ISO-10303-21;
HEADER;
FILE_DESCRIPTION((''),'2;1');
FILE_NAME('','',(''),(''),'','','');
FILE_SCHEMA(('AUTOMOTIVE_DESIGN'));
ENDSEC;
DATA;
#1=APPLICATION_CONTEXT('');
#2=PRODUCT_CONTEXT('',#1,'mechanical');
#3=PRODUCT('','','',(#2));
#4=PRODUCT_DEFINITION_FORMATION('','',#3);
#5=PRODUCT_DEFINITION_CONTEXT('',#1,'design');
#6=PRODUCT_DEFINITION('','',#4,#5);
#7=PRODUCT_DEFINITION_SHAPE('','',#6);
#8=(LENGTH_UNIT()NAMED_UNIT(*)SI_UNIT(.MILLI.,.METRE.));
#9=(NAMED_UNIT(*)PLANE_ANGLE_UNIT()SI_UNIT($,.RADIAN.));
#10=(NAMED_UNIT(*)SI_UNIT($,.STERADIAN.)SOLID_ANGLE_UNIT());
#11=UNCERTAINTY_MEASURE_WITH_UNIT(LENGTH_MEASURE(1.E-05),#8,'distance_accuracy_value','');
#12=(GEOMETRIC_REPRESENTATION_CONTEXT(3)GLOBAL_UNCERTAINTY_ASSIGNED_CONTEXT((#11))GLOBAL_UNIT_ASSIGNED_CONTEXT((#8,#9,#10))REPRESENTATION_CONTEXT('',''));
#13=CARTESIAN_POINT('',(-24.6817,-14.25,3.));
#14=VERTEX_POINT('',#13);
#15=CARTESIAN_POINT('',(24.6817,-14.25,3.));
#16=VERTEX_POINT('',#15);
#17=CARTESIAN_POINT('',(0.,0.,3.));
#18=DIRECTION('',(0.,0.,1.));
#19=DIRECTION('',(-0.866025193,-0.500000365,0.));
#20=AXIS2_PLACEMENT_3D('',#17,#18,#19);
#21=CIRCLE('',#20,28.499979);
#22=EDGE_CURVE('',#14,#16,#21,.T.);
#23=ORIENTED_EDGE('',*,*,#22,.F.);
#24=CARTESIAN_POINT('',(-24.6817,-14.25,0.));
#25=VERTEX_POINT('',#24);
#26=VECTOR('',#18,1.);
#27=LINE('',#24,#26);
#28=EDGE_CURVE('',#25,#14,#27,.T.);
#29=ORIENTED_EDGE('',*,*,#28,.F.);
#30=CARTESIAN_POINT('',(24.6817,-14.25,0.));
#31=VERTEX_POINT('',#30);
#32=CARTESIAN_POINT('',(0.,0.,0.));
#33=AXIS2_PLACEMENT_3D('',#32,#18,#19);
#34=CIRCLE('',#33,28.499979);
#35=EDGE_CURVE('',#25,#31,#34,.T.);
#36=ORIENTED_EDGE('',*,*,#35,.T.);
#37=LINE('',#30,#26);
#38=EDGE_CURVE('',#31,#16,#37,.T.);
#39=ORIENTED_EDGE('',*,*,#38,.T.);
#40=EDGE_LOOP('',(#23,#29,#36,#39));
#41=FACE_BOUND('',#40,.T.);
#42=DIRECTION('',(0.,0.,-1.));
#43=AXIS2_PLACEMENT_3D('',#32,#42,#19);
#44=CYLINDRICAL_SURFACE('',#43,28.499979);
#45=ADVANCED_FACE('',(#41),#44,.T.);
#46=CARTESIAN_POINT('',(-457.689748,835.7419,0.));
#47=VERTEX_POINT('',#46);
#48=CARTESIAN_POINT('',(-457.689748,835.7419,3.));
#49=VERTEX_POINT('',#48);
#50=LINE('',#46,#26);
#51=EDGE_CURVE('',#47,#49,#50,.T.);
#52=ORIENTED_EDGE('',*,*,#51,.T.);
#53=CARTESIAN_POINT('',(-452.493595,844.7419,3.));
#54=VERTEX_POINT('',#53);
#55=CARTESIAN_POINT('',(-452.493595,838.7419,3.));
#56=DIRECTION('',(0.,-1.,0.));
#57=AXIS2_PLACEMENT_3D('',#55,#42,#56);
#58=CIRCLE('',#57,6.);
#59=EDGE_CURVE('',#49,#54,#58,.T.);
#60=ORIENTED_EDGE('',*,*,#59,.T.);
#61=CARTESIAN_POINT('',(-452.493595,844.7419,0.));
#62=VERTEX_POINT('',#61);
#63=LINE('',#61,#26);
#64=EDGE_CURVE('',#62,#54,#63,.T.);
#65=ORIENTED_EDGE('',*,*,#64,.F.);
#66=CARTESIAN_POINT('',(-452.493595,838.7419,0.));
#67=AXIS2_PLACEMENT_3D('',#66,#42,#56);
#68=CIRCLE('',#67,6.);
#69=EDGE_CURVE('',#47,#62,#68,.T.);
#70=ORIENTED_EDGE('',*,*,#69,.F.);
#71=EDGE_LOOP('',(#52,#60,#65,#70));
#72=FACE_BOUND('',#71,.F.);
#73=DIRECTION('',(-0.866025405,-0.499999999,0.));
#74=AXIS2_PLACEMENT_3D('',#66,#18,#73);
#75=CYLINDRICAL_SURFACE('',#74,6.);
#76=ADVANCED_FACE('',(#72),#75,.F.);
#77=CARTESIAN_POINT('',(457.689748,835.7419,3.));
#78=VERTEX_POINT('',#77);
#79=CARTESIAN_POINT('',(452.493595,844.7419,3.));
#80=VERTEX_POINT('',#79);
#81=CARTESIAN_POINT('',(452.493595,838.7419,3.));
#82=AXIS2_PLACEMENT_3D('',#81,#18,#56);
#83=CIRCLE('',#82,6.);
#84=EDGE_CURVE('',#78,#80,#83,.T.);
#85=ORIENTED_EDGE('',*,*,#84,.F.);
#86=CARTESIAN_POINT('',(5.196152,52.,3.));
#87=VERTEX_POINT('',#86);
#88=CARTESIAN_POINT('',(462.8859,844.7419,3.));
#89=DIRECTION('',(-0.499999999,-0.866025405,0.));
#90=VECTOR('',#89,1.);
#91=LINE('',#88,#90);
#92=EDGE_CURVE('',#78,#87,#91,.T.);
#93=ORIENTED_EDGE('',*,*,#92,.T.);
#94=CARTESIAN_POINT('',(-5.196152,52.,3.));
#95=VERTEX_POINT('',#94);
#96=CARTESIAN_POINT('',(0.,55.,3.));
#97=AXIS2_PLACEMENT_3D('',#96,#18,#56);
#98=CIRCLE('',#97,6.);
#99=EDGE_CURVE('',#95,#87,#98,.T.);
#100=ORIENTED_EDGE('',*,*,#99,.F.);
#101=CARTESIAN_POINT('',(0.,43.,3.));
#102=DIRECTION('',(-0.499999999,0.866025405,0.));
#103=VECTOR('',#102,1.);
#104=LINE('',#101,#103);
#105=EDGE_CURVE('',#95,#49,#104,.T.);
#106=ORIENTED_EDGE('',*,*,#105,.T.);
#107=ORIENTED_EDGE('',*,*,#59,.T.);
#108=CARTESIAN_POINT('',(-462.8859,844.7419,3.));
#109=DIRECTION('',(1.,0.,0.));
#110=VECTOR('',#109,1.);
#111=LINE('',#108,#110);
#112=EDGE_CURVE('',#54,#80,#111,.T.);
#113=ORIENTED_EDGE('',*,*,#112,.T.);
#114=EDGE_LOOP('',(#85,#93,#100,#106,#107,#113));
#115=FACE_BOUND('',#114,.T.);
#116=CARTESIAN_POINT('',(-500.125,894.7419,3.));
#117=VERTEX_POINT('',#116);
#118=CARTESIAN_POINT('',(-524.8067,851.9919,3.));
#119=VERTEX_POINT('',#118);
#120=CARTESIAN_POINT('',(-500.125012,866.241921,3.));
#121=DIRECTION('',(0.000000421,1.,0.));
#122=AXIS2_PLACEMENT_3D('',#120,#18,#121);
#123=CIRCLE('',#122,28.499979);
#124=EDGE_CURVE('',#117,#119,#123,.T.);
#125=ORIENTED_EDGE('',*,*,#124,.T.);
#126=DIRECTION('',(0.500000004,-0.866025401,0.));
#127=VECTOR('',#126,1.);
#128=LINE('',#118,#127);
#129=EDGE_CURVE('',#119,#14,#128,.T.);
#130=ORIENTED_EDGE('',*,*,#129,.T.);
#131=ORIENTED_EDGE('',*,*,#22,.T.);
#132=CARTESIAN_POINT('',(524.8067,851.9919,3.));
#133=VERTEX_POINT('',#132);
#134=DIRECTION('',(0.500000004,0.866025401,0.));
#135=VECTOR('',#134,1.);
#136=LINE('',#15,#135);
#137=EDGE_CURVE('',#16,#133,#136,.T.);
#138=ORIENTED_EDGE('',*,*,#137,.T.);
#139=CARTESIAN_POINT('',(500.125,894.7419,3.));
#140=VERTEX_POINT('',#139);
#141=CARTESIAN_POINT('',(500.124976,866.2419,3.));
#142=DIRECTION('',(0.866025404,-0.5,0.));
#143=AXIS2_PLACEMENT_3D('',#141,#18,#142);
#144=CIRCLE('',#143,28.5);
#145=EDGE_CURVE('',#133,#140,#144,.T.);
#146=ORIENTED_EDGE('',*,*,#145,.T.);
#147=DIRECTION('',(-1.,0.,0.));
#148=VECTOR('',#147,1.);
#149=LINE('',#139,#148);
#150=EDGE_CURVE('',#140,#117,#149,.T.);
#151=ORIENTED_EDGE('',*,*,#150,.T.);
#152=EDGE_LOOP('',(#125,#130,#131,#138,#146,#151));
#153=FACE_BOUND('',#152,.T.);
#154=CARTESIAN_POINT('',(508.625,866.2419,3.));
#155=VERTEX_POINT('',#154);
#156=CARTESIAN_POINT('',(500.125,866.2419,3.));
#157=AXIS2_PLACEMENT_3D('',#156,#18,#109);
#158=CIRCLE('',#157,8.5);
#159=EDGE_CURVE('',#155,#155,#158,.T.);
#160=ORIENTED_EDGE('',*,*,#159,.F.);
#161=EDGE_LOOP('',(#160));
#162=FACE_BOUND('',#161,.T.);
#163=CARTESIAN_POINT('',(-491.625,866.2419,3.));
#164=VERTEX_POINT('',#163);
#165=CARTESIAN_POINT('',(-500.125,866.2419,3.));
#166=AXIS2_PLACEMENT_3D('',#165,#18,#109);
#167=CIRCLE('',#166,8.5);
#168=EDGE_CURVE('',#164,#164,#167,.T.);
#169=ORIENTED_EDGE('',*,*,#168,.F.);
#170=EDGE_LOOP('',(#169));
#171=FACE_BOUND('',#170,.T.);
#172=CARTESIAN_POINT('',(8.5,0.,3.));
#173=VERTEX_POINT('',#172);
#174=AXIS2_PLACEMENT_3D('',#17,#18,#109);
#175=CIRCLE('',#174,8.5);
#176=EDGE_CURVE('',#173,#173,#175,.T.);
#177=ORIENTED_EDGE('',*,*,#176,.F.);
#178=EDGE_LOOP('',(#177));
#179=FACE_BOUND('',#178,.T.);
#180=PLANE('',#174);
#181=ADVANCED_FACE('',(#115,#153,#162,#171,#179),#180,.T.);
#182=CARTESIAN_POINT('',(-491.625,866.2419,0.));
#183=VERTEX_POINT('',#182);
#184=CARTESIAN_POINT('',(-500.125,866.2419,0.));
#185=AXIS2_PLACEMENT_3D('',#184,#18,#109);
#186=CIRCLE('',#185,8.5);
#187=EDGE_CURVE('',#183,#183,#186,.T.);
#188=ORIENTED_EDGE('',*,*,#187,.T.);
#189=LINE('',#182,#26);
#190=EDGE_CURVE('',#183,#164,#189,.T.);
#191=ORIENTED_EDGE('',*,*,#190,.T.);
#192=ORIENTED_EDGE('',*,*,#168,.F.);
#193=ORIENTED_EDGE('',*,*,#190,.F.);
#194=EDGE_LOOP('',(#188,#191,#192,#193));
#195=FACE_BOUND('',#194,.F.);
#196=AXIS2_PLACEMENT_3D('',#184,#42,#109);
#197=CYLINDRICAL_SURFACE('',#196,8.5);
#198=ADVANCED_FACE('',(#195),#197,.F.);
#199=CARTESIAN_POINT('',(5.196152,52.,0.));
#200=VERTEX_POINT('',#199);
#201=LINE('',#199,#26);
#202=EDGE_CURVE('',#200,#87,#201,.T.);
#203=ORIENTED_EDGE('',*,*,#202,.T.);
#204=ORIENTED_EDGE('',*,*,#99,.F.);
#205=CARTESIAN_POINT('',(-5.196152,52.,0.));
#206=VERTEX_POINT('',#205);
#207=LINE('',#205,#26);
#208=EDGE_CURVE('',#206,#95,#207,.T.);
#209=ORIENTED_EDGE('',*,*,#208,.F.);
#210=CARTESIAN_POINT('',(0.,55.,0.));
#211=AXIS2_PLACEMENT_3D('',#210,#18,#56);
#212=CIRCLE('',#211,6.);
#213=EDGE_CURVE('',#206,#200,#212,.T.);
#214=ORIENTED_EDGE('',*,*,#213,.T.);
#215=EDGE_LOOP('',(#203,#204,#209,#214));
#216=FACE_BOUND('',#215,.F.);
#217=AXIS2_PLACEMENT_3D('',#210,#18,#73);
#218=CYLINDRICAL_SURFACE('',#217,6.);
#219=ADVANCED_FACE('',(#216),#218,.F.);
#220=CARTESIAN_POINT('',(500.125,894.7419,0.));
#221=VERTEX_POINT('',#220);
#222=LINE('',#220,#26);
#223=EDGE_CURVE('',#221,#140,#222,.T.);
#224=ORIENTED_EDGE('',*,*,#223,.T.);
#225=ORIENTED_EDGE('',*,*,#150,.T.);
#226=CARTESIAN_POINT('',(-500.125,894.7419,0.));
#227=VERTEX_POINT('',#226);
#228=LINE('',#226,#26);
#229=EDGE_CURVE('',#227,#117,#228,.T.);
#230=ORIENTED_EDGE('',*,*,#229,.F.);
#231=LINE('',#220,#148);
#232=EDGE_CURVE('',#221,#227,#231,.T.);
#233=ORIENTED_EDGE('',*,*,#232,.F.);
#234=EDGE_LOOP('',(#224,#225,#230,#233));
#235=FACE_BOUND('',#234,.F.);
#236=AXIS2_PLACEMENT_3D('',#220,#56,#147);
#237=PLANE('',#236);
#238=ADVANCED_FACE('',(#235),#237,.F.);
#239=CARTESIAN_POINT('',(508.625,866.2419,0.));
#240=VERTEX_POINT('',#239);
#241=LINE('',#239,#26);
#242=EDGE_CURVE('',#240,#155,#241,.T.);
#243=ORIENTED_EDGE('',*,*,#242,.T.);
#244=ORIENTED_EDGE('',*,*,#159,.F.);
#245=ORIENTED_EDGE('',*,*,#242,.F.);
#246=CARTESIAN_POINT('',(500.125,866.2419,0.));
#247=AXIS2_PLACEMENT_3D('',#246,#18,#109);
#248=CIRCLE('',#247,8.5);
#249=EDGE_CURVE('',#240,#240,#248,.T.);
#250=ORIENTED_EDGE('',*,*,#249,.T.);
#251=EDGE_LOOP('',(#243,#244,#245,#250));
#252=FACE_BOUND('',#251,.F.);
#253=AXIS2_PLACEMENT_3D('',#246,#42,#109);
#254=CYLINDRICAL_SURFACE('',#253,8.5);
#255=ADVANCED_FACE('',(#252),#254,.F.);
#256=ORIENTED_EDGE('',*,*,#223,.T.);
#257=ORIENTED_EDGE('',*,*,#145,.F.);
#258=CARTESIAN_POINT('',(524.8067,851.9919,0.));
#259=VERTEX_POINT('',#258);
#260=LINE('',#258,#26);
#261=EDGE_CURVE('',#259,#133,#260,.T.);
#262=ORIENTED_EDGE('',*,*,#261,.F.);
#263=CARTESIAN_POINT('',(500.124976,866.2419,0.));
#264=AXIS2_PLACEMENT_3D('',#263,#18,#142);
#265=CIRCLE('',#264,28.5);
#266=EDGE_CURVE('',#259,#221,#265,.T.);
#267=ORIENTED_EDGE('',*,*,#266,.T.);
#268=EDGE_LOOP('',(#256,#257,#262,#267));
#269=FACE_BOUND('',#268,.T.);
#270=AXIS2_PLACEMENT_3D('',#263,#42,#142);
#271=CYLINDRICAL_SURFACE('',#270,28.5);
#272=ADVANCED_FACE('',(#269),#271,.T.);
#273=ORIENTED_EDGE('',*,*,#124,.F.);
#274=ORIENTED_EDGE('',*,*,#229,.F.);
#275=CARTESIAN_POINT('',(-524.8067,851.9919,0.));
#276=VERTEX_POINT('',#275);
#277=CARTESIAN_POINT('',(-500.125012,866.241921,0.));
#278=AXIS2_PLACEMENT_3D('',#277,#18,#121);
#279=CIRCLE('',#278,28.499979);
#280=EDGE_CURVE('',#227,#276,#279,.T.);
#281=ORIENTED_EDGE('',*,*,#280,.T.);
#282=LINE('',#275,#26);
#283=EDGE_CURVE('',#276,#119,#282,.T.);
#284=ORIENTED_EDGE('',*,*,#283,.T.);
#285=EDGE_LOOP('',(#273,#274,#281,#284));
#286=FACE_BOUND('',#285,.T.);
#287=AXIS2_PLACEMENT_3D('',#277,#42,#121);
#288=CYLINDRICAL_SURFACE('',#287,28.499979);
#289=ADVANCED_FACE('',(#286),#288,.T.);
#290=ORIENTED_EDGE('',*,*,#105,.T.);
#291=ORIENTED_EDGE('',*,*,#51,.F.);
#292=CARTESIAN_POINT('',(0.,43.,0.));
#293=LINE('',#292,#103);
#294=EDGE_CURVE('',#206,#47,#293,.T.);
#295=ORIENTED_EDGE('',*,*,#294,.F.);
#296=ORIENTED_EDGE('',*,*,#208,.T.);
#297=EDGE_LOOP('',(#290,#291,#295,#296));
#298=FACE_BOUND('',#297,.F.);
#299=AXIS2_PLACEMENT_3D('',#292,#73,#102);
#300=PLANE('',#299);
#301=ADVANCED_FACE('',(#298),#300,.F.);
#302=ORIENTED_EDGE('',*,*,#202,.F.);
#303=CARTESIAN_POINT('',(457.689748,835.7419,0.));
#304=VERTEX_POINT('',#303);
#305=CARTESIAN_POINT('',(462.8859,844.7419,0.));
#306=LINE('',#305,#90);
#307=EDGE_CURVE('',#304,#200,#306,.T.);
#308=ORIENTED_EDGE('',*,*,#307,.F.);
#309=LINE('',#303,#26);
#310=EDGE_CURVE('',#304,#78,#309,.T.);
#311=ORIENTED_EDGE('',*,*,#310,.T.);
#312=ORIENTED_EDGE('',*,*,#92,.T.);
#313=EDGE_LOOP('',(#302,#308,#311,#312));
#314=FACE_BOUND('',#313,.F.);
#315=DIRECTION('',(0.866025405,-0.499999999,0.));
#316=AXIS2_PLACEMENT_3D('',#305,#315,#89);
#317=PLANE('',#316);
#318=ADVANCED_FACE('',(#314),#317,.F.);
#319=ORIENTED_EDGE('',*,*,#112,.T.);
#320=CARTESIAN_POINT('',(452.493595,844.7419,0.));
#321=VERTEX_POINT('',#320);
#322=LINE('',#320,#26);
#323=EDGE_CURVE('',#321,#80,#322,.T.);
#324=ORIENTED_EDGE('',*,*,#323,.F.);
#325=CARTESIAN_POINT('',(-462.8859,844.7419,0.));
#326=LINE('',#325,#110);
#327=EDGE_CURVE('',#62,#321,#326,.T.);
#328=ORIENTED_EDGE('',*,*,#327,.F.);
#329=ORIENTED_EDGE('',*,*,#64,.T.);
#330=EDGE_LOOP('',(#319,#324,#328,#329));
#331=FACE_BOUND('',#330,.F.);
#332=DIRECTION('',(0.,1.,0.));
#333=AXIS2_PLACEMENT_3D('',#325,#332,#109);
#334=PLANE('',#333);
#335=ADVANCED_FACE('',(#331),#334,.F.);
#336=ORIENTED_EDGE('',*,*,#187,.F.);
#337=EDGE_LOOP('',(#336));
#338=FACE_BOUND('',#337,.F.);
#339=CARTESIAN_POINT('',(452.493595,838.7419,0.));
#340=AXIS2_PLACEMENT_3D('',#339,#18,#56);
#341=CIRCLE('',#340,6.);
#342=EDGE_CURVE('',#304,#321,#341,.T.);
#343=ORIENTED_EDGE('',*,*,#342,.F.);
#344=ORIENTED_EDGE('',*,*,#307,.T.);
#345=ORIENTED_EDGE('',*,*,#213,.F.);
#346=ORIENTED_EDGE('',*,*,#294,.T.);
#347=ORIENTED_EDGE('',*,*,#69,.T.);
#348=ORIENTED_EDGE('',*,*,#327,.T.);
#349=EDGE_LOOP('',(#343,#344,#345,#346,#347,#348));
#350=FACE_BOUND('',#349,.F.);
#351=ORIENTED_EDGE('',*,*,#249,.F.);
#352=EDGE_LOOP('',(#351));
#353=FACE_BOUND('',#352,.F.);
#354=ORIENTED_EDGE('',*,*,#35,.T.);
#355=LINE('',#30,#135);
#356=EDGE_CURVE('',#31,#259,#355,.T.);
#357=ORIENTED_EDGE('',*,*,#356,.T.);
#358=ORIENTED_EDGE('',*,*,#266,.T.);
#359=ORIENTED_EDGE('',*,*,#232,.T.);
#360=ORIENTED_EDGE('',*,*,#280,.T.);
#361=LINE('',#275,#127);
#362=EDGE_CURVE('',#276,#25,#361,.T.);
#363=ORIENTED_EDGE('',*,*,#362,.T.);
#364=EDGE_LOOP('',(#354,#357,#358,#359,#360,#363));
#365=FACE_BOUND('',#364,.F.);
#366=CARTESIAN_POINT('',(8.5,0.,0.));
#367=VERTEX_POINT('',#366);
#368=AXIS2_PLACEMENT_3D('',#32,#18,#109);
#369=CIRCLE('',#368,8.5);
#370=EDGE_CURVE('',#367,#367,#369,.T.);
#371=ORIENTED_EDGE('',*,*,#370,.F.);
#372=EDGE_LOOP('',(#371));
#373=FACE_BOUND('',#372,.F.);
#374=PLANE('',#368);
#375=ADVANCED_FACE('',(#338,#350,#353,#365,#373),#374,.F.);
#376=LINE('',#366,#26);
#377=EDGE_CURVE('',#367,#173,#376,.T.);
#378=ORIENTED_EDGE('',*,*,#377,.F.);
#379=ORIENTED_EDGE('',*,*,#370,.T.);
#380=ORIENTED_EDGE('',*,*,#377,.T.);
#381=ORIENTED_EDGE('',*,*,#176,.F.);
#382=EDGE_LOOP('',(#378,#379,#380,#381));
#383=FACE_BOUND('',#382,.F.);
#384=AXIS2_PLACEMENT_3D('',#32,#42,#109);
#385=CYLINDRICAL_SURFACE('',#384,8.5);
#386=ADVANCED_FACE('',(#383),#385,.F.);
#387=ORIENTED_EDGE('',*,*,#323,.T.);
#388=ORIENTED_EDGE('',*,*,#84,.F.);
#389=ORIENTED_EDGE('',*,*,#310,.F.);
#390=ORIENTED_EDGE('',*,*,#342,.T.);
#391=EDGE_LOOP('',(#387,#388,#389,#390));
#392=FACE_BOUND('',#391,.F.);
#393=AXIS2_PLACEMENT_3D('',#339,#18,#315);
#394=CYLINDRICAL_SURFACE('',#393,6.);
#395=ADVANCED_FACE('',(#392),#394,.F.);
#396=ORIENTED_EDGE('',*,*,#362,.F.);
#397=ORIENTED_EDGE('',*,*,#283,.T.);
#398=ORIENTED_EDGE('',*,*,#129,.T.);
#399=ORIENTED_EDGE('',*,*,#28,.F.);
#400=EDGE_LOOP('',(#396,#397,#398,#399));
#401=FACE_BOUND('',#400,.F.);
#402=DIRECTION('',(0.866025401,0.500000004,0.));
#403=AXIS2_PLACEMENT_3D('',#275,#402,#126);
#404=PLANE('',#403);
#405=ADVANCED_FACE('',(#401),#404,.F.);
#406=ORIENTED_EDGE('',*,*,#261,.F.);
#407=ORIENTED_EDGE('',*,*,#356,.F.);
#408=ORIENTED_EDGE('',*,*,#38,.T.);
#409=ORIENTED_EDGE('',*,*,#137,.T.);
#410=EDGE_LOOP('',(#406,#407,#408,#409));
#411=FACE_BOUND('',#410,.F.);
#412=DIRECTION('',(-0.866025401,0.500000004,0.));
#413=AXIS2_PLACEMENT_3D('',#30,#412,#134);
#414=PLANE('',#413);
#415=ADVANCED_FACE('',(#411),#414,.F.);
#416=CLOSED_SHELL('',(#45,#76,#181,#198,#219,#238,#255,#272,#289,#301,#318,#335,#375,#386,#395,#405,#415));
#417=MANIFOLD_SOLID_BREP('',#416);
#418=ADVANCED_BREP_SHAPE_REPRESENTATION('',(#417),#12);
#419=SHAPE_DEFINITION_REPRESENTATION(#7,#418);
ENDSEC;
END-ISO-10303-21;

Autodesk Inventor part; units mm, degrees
ref_plane "YZ Plane" through (0, 0, 0) normal (1, 0, 0) x (0, 1, 0)
ref_plane "XZ Plane" through (0, 0, 0) normal (0, 1, 0) x (-1, 0, 0)
ref_plane "XY Plane" through (0, 0, 0) normal (0, 0, 1) x (1, 0, 0)
sketch "Sketch1" plane through (0, 0, 0) normal (0, 0, 1) x (1, 0, 0)
  circle A0 centre (0, 0) radius 8.5
  line L0 (-524.8067, 851.9919) -> (-24.6817, -14.25)
  arc A1 (-24.6817, -14.25) -> (24.6817, -14.25) centre (0, 0) ccw
  line L1 (24.6817, -14.25) -> (524.8067, 851.9919)
  arc A2 (524.8067, 851.9919) -> (500.125, 894.7419) centre (500.125, 866.2419) ccw
  line L2 (500.125, 894.7419) -> (-500.125, 894.7419)
  arc A3 (-500.125, 894.7419) -> (-524.8067, 851.9919) centre (-500.125, 866.2419) ccw
  line L3 (0, 0) -> (0, 894.7419) construction
  line L4 (-462.8859, 844.7419) -> (462.8859, 844.7419)
  line L5 (462.8859, 844.7419) -> (0, 43)
  line L6 (0, 43) -> (-462.8859, 844.7419)
  circle A4 centre (-500.125, 866.2419) radius 8.5
  circle A5 centre (500.125, 866.2419) radius 8.5
  dimension "d34" = 17
  dimension "d35" = 20
  dimension "d36" = 1000.25
  dimension "d37" = 1000.25
  dimension "d38" = 50
  dimension "d39" = 17
  dimension "d40" = 17
extrude "Plate1" add sketch "Sketch1" along normal blind 3
fillet "Corner Round3" radius 6 3 edges at (-462.8859, 844.7419, 1.5) (0, 43, 1.5) (462.8859, 844.7419, 1.5)
equation "\"d37\" = d36"
equation "\"d2\" = Thickness"
equation "\"BendReliefWidth\" = Thickness"
equation "\"BendReliefDepth\" = 0.5 * Thickness"
equation "\"CornerReliefSize\" = 4 * Thickness"
equation "\"MinimumRemnant\" = 2 * Thickness"
equation "\"TransitionRadius\" = BendRadius"
equation "\"JacobiRadiusSize\" = BendRadius"
equation "\"GapSize\" = Thickness"
equation "\"Thickness\" = 3"
equation "\"BendRadius\" = 5"
properties part number "PNS-688 leg 1200 pattern" material "Stainless Steel"
